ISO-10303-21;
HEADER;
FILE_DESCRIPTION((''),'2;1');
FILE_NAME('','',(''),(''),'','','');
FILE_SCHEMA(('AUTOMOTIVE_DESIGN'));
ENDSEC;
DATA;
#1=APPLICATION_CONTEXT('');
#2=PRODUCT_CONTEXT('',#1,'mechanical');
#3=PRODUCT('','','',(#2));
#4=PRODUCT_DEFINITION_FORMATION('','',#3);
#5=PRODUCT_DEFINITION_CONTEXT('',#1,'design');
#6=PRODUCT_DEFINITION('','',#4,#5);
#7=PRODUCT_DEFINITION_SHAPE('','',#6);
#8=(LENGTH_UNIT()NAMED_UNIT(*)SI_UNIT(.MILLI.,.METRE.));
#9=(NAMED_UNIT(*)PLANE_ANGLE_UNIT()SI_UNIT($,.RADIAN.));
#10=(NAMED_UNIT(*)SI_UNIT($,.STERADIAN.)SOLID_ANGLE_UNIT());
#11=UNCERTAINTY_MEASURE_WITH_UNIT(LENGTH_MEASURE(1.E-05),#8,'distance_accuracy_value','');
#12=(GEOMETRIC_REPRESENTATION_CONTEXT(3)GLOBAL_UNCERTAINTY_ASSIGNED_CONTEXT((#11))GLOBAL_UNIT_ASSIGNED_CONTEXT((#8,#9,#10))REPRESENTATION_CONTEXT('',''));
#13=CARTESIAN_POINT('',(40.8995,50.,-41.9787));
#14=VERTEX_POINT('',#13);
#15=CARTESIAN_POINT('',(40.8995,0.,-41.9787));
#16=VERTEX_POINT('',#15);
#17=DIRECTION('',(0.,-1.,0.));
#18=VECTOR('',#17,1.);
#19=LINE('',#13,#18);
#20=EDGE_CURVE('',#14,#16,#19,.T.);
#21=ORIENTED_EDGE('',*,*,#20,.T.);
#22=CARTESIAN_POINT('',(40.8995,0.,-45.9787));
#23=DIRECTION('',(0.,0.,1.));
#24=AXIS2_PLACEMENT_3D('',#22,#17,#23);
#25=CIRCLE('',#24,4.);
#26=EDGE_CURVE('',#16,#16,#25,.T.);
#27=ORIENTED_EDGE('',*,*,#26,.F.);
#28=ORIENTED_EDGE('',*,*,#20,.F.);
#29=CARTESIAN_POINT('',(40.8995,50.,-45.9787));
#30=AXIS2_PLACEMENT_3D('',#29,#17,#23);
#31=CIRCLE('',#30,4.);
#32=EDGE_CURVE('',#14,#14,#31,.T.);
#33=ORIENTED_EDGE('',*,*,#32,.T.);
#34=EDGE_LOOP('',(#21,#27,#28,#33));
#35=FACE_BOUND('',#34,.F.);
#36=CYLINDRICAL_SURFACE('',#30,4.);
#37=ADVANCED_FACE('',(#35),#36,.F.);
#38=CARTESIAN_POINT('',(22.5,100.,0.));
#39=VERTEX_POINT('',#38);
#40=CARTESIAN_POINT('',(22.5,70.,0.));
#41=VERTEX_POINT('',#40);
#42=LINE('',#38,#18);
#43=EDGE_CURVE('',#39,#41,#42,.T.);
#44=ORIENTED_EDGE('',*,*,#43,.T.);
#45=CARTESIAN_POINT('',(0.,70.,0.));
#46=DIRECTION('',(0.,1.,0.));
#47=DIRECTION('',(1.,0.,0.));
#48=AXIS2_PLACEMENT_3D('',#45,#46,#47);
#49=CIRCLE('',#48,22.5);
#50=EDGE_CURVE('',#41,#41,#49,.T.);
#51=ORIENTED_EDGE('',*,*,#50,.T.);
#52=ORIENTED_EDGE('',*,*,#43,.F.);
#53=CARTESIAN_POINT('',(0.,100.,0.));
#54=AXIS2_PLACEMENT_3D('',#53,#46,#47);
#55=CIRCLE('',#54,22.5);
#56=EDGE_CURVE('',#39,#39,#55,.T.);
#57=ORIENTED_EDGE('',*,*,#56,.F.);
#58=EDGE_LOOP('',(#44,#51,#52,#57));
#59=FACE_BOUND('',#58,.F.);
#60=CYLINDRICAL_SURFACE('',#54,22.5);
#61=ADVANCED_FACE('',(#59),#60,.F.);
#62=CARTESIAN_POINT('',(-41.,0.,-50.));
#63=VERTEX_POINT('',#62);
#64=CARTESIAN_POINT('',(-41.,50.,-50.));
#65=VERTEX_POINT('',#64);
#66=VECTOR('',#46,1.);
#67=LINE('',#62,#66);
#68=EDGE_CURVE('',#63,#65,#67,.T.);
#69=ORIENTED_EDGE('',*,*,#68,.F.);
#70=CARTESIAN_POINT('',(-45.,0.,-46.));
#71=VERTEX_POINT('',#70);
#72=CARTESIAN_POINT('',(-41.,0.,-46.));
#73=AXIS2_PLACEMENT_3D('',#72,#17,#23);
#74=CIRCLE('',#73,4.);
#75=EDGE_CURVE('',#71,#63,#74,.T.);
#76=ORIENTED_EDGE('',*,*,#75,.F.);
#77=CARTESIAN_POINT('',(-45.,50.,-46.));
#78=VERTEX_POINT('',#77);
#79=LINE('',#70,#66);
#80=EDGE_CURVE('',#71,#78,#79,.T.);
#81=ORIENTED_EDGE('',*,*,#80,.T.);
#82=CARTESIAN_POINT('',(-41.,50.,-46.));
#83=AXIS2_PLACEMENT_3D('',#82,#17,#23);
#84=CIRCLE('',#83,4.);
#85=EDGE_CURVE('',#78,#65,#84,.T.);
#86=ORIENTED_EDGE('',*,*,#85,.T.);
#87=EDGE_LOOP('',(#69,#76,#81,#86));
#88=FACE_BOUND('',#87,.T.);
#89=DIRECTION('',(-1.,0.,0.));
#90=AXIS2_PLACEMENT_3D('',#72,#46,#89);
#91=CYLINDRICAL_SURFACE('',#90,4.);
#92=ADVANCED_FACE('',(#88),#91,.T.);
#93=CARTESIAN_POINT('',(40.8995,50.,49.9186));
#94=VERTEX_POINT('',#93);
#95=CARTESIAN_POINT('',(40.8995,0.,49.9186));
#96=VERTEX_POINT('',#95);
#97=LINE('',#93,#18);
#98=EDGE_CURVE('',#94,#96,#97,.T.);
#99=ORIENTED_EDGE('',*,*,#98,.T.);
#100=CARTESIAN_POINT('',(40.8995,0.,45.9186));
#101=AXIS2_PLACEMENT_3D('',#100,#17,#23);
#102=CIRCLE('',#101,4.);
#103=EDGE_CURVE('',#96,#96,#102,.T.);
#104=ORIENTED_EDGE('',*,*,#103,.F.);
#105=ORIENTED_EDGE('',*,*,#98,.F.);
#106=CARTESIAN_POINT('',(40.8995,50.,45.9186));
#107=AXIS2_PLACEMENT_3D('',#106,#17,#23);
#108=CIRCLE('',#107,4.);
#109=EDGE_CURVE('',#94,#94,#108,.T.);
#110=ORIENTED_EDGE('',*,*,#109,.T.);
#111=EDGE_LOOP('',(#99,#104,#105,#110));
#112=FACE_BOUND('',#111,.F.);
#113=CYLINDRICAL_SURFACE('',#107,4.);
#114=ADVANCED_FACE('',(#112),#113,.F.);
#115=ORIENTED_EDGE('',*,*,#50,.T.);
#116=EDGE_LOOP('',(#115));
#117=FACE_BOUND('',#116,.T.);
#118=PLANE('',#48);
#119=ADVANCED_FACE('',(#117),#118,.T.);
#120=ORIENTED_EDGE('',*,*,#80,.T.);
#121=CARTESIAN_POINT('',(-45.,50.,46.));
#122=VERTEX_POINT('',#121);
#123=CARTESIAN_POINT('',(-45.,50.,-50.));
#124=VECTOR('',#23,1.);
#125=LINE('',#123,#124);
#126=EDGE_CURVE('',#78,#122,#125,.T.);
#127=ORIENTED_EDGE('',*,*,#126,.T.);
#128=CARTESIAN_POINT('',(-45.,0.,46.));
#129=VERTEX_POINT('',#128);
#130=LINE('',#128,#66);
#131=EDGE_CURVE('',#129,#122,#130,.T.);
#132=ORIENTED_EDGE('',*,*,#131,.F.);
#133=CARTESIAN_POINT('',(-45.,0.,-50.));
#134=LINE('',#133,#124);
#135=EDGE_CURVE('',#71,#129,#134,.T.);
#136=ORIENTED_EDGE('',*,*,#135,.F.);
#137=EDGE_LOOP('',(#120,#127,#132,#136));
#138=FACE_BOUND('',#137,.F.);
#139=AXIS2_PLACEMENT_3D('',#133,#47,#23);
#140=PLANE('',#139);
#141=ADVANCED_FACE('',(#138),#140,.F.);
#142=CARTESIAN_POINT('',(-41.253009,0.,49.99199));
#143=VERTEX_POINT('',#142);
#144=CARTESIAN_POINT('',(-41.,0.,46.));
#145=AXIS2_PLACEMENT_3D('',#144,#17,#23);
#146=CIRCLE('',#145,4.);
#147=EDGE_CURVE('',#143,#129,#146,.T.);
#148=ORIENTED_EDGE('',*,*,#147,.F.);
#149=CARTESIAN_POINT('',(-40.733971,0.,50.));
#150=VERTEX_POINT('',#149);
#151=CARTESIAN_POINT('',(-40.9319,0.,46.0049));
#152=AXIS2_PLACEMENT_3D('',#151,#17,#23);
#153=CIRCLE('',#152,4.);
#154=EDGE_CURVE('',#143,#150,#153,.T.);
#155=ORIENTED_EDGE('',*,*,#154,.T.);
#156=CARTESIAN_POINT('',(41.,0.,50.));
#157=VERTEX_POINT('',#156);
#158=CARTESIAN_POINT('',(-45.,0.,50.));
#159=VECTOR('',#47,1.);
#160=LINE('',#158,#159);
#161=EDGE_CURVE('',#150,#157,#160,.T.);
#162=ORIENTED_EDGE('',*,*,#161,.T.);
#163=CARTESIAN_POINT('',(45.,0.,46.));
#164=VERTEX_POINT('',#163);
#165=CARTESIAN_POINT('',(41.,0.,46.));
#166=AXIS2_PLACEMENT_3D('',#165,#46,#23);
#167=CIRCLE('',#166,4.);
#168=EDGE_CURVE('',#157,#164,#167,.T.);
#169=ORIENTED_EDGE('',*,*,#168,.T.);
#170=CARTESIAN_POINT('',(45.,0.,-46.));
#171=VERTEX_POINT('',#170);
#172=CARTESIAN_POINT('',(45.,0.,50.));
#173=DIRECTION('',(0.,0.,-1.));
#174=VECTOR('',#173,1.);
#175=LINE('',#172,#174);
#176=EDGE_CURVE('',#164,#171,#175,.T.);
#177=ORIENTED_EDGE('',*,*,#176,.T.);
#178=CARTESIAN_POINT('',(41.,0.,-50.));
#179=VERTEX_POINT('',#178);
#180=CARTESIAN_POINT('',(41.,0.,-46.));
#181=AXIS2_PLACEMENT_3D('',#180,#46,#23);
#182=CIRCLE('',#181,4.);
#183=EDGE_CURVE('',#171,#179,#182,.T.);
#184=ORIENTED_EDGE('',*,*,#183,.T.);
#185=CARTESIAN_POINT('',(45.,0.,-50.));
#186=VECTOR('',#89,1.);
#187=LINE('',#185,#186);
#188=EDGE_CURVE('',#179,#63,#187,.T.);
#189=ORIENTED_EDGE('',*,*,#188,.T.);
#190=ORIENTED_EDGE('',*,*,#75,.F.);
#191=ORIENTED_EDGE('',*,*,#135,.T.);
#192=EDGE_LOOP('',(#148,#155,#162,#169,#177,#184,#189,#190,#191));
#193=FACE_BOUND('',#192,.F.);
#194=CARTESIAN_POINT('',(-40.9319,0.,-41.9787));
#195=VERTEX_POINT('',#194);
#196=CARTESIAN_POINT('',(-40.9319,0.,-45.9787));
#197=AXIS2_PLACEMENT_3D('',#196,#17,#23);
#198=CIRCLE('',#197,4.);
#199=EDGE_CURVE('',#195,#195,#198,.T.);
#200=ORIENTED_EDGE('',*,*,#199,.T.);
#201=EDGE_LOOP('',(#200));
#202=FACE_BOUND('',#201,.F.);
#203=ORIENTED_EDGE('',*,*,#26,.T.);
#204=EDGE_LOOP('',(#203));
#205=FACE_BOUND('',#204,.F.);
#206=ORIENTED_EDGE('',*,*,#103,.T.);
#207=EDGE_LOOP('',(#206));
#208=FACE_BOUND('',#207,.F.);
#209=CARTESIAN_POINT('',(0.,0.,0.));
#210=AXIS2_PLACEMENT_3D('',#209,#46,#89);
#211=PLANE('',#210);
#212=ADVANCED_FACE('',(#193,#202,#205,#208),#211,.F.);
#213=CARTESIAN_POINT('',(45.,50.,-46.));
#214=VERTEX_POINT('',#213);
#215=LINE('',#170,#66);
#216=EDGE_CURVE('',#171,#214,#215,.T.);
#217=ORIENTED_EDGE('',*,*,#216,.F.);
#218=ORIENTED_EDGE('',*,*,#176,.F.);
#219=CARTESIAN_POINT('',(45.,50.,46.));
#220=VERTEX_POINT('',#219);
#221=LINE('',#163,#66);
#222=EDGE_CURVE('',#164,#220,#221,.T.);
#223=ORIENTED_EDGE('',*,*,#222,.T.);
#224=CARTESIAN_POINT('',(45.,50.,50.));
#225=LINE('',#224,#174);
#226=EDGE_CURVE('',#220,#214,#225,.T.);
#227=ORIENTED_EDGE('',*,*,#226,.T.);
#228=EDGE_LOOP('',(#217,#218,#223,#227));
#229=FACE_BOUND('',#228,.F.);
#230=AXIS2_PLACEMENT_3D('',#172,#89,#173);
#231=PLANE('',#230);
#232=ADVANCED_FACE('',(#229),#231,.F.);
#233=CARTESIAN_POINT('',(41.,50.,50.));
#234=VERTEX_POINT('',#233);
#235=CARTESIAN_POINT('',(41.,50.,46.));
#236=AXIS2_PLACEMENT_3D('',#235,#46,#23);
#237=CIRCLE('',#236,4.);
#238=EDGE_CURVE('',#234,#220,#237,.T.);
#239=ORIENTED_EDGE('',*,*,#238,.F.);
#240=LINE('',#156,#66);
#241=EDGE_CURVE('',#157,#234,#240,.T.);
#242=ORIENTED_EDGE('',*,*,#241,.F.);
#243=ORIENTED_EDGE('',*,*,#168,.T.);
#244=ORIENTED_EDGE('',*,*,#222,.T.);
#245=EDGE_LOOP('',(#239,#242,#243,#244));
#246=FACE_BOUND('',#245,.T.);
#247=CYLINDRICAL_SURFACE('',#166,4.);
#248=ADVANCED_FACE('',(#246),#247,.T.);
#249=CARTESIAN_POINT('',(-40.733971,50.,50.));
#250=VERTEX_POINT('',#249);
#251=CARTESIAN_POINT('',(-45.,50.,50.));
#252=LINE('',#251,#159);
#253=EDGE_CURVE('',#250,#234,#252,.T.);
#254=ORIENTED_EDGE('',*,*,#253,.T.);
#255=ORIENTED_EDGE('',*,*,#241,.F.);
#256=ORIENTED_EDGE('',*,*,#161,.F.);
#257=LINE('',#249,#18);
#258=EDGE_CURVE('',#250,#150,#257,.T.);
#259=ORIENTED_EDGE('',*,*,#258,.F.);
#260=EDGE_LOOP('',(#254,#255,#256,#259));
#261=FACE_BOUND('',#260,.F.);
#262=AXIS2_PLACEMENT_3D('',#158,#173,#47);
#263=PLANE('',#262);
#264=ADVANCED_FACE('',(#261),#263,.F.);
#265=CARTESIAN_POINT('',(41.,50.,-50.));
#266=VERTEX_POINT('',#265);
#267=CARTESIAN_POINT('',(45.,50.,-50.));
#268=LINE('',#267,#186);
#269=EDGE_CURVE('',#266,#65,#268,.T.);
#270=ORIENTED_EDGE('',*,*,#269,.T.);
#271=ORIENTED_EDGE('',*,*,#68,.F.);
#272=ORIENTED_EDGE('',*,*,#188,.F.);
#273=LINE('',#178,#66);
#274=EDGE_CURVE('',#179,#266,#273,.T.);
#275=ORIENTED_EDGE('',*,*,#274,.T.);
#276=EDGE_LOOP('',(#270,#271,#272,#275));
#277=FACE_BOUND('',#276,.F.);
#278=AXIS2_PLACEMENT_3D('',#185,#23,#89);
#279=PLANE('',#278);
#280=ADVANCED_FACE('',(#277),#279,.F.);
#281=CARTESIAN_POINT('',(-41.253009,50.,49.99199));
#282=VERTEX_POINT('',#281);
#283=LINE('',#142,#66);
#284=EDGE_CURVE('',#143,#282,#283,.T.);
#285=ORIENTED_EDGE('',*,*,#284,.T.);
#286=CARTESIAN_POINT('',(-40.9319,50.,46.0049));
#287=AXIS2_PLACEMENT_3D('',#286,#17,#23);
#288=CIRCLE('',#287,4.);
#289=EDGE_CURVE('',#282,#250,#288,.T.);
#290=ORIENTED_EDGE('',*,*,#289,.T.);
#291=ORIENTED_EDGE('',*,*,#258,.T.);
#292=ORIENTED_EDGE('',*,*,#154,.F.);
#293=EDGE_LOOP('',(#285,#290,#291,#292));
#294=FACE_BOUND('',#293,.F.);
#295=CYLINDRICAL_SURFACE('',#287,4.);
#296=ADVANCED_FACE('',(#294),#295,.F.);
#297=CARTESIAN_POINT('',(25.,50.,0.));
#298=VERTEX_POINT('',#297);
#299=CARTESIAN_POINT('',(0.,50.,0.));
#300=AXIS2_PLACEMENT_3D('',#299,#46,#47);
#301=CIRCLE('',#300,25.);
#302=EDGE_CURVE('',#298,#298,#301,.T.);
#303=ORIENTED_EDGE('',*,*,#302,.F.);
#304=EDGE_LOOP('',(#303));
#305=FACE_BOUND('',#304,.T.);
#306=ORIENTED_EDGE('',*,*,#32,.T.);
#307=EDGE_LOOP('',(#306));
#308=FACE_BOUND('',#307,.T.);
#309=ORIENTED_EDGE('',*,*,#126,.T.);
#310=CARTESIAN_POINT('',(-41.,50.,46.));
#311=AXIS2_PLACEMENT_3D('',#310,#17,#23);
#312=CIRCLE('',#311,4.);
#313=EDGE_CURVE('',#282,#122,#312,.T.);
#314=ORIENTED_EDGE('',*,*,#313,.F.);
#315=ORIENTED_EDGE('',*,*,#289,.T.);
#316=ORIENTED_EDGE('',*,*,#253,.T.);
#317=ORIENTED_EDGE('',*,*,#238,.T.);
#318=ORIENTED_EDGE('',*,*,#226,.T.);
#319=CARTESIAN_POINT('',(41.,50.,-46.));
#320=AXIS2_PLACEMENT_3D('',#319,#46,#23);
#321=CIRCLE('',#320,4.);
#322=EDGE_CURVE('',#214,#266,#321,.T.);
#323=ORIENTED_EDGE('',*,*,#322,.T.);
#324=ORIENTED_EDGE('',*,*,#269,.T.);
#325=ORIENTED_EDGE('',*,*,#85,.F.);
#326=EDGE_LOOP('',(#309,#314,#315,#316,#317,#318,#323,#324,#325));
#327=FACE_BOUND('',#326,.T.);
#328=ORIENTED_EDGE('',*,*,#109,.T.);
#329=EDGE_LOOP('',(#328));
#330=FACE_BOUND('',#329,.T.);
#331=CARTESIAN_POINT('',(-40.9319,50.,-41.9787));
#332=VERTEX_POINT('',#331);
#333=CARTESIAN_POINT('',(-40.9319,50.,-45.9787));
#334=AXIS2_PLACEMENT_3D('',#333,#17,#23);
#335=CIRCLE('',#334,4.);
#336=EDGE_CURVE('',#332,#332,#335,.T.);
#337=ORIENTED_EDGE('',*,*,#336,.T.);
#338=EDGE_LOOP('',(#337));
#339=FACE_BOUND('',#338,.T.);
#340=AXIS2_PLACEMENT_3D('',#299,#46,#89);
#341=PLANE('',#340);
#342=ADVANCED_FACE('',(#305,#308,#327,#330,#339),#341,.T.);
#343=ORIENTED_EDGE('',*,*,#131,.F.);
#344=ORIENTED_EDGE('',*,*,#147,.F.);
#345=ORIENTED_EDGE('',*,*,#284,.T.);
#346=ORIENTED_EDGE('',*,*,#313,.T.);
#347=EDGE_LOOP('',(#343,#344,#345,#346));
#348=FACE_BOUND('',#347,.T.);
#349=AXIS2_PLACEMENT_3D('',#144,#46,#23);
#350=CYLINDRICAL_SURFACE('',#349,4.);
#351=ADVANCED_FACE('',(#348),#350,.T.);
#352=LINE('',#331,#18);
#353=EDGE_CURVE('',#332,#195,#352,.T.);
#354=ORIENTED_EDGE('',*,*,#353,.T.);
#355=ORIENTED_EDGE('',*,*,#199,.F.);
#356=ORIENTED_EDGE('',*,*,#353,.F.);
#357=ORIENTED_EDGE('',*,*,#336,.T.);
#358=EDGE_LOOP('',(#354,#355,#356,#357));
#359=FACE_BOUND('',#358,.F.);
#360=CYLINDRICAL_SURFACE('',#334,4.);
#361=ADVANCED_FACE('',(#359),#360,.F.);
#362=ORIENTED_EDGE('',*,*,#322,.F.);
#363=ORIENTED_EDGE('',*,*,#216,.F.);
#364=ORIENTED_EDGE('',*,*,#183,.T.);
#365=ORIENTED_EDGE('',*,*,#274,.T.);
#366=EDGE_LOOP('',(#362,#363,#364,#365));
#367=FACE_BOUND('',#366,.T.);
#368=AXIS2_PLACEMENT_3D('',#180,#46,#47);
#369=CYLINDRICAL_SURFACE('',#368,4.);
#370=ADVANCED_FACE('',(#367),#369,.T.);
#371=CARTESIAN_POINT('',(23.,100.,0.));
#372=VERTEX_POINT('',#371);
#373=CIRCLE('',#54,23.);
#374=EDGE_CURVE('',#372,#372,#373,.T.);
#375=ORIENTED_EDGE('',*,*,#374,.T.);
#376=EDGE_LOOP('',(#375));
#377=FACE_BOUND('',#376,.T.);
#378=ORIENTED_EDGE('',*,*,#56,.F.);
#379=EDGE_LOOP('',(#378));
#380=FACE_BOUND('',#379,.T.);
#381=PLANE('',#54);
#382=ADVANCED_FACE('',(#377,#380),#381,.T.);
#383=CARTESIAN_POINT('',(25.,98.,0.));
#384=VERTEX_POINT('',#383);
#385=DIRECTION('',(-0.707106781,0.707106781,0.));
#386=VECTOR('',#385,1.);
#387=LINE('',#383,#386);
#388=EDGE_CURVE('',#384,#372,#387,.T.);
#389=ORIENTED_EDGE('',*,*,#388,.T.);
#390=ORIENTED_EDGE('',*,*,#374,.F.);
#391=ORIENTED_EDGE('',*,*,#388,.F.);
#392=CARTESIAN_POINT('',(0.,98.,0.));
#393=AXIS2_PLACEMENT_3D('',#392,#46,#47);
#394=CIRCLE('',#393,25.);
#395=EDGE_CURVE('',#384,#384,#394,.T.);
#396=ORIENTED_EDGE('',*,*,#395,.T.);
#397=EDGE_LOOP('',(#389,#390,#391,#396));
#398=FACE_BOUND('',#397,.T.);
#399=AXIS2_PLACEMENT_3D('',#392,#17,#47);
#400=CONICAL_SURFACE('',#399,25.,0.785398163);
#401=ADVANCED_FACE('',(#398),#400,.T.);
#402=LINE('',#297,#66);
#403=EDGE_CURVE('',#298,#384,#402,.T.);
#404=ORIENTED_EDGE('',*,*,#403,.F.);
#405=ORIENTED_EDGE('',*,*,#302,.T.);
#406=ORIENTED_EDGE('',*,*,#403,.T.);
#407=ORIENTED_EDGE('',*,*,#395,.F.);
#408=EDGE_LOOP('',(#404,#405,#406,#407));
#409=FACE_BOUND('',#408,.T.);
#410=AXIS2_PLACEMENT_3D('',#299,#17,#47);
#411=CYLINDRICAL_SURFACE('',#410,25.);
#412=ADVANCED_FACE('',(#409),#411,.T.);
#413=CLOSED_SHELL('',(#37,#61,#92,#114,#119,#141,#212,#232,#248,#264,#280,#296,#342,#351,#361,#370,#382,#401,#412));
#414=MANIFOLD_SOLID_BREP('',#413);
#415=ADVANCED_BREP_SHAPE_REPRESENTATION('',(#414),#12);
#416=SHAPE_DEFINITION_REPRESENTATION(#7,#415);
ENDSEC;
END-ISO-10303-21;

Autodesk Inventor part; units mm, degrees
ref_plane "YZ Plane" through (0, 0, 0) normal (1, 0, 0) x (0, 1, 0)
ref_plane "XZ Plane" through (0, 0, 0) normal (0, 1, 0) x (-1, 0, 0)
ref_plane "XY Plane" through (0, 0, 0) normal (0, 0, 1) x (1, 0, 0)
sketch "Sketch1" plane through (0, 0, 0) normal (0, 1, 0) x (-1, 0, 0)
  line L0 (45, 50) -> (-45, 50)
  line L1 (-45, 50) -> (-45, -50)
  line L2 (-45, -50) -> (45, -50)
  line L3 (45, -50) -> (45, 50)
  line L4 (45, 50) -> (-45, -50) construction
  line L5 (-45, 50) -> (45, -50) construction
  point P0 (0, 0)
  point P1 (42.3062, 47.0069)
  point P2 (42.3062, -47.0069)
  point P3 (-42.3062, -47.0069)
  point P4 (-42.3062, 47.0069)
  dimension "d0" = 90
  dimension "d1" = 100
extrude "Extrusion1" add sketch "Sketch1" along normal blind 50
sketch "Sketch2" plane through (0, 50, 0) normal (0, 1, 0) x (1, 0, 0)
  circle A0 centre (0, 0) radius 25
  dimension "d5" = 50
extrude "Extrusion2" add sketch "Sketch2" along normal blind 50
sketch "Sketch3" plane through (0, 50, 0) normal (0, 1, 0) x (1, 0, 0)
  point P0 (0, 0)
fillet "Fillet1" radius 4 1 edges at (45, 25, 50)
fillet "Fillet2" radius 4 3 edges at (-45, 25, 50) (45, 25, -50) (-45, 25, -50)
sketch "Sketch4" plane through (0, 50, 0) normal (0, 1, 0) x (1, 0, 0)
  circle A0 centre (-40.9319, 45.9787) radius 4
  circle A1 centre (40.8995, 45.9787) radius 4
  circle A2 centre (40.8995, -45.9186) radius 4
  circle A3 centre (-40.9319, -46.0049) radius 4
  point P0 (0, 0)
  dimension "d20" = 8
  dimension "d21" = 8
  dimension "d22" = 8
  dimension "d23" = 8
sketch "Sketch5" plane through (0, 50, 0) normal (0, 1, 0) x (1, 0, 0)
  circle A0 centre (0, 0) radius 22.5
  dimension "d16" = 45
sketch "Sketch6" plane through (0, 100, 0) normal (0, 1, 0) x (1, 0, 0)
  circle A0 centre (0, 0) radius 22.5
  dimension "d17" = 45
extrude "Extrusion3" cut sketch "Sketch6" against normal blind 30
sketch "Sketch7" plane through (0, 50, 0) normal (0, 1, 0) x (1, 0, 0)
  point P0 (0, 0)
sketch "Sketch8" plane through (0, 50, 0) normal (0, 1, 0) x (1, 0, 0)
  point P0 (0, 0)
hole "Hole1" at (40.8995, 50, 45.9186) direction (0, -1, 0) diameter 8 end through all
hole "Hole2" at (40.8995, 50, -45.9787) direction (0, -1, 0) diameter 8 end through all
hole "Hole3" at (-40.9319, 50, 46.0049) direction (0, -1, 0) diameter 8 end through all
hole "Hole4" at (-40.9319, 50, -45.9787) direction (0, -1, 0) diameter 8 end through all
thread "Thread1" size "M8x1.25" class "6H" standard "ANSI Metric M Profile" full length
thread "Thread2" size "M8x1.25" class "6H" standard "ANSI Metric M Profile" full length
thread "Thread3" size "M8x1.25" class "6H" standard "ANSI Metric M Profile" full length
thread "Thread4" size "M8x1.25" class "6H" standard "ANSI Metric M Profile" full length
chamfer "Chamfer1" distance 2 angle 45 1 edges at (-25, 100, 0)
sketch "Sketch9" plane through (0, 50, 0) normal (0, 1, 0) x (1, 0, 0)
  point P0 (0, 0)
sketch "Sketch10" plane through (0, 50, 0) normal (0, 1, 0) x (1, 0, 0)
  point P0 (0, 0)
sketch "Sketch11" plane through (0, 50, 0) normal (0, 1, 0) x (1, 0, 0)
  line L0 (45, -46) -> (45, 46) projected
  line L1 (-45, 46) -> (-45, -46) projected
  line L2 (41, 50) -> (-41, 50) projected
  line L3 (-40.7332, -50) -> (41, -50) projected
  point P0 (0, 0)
  point P1 (45, 0)
  point P2 (-45, 0)
  point P3 (0, 50)
  point P4 (0.1334, -50)
  dimension "d63" = 90
  dimension "d64" = 100
properties part number "Practica 1"
